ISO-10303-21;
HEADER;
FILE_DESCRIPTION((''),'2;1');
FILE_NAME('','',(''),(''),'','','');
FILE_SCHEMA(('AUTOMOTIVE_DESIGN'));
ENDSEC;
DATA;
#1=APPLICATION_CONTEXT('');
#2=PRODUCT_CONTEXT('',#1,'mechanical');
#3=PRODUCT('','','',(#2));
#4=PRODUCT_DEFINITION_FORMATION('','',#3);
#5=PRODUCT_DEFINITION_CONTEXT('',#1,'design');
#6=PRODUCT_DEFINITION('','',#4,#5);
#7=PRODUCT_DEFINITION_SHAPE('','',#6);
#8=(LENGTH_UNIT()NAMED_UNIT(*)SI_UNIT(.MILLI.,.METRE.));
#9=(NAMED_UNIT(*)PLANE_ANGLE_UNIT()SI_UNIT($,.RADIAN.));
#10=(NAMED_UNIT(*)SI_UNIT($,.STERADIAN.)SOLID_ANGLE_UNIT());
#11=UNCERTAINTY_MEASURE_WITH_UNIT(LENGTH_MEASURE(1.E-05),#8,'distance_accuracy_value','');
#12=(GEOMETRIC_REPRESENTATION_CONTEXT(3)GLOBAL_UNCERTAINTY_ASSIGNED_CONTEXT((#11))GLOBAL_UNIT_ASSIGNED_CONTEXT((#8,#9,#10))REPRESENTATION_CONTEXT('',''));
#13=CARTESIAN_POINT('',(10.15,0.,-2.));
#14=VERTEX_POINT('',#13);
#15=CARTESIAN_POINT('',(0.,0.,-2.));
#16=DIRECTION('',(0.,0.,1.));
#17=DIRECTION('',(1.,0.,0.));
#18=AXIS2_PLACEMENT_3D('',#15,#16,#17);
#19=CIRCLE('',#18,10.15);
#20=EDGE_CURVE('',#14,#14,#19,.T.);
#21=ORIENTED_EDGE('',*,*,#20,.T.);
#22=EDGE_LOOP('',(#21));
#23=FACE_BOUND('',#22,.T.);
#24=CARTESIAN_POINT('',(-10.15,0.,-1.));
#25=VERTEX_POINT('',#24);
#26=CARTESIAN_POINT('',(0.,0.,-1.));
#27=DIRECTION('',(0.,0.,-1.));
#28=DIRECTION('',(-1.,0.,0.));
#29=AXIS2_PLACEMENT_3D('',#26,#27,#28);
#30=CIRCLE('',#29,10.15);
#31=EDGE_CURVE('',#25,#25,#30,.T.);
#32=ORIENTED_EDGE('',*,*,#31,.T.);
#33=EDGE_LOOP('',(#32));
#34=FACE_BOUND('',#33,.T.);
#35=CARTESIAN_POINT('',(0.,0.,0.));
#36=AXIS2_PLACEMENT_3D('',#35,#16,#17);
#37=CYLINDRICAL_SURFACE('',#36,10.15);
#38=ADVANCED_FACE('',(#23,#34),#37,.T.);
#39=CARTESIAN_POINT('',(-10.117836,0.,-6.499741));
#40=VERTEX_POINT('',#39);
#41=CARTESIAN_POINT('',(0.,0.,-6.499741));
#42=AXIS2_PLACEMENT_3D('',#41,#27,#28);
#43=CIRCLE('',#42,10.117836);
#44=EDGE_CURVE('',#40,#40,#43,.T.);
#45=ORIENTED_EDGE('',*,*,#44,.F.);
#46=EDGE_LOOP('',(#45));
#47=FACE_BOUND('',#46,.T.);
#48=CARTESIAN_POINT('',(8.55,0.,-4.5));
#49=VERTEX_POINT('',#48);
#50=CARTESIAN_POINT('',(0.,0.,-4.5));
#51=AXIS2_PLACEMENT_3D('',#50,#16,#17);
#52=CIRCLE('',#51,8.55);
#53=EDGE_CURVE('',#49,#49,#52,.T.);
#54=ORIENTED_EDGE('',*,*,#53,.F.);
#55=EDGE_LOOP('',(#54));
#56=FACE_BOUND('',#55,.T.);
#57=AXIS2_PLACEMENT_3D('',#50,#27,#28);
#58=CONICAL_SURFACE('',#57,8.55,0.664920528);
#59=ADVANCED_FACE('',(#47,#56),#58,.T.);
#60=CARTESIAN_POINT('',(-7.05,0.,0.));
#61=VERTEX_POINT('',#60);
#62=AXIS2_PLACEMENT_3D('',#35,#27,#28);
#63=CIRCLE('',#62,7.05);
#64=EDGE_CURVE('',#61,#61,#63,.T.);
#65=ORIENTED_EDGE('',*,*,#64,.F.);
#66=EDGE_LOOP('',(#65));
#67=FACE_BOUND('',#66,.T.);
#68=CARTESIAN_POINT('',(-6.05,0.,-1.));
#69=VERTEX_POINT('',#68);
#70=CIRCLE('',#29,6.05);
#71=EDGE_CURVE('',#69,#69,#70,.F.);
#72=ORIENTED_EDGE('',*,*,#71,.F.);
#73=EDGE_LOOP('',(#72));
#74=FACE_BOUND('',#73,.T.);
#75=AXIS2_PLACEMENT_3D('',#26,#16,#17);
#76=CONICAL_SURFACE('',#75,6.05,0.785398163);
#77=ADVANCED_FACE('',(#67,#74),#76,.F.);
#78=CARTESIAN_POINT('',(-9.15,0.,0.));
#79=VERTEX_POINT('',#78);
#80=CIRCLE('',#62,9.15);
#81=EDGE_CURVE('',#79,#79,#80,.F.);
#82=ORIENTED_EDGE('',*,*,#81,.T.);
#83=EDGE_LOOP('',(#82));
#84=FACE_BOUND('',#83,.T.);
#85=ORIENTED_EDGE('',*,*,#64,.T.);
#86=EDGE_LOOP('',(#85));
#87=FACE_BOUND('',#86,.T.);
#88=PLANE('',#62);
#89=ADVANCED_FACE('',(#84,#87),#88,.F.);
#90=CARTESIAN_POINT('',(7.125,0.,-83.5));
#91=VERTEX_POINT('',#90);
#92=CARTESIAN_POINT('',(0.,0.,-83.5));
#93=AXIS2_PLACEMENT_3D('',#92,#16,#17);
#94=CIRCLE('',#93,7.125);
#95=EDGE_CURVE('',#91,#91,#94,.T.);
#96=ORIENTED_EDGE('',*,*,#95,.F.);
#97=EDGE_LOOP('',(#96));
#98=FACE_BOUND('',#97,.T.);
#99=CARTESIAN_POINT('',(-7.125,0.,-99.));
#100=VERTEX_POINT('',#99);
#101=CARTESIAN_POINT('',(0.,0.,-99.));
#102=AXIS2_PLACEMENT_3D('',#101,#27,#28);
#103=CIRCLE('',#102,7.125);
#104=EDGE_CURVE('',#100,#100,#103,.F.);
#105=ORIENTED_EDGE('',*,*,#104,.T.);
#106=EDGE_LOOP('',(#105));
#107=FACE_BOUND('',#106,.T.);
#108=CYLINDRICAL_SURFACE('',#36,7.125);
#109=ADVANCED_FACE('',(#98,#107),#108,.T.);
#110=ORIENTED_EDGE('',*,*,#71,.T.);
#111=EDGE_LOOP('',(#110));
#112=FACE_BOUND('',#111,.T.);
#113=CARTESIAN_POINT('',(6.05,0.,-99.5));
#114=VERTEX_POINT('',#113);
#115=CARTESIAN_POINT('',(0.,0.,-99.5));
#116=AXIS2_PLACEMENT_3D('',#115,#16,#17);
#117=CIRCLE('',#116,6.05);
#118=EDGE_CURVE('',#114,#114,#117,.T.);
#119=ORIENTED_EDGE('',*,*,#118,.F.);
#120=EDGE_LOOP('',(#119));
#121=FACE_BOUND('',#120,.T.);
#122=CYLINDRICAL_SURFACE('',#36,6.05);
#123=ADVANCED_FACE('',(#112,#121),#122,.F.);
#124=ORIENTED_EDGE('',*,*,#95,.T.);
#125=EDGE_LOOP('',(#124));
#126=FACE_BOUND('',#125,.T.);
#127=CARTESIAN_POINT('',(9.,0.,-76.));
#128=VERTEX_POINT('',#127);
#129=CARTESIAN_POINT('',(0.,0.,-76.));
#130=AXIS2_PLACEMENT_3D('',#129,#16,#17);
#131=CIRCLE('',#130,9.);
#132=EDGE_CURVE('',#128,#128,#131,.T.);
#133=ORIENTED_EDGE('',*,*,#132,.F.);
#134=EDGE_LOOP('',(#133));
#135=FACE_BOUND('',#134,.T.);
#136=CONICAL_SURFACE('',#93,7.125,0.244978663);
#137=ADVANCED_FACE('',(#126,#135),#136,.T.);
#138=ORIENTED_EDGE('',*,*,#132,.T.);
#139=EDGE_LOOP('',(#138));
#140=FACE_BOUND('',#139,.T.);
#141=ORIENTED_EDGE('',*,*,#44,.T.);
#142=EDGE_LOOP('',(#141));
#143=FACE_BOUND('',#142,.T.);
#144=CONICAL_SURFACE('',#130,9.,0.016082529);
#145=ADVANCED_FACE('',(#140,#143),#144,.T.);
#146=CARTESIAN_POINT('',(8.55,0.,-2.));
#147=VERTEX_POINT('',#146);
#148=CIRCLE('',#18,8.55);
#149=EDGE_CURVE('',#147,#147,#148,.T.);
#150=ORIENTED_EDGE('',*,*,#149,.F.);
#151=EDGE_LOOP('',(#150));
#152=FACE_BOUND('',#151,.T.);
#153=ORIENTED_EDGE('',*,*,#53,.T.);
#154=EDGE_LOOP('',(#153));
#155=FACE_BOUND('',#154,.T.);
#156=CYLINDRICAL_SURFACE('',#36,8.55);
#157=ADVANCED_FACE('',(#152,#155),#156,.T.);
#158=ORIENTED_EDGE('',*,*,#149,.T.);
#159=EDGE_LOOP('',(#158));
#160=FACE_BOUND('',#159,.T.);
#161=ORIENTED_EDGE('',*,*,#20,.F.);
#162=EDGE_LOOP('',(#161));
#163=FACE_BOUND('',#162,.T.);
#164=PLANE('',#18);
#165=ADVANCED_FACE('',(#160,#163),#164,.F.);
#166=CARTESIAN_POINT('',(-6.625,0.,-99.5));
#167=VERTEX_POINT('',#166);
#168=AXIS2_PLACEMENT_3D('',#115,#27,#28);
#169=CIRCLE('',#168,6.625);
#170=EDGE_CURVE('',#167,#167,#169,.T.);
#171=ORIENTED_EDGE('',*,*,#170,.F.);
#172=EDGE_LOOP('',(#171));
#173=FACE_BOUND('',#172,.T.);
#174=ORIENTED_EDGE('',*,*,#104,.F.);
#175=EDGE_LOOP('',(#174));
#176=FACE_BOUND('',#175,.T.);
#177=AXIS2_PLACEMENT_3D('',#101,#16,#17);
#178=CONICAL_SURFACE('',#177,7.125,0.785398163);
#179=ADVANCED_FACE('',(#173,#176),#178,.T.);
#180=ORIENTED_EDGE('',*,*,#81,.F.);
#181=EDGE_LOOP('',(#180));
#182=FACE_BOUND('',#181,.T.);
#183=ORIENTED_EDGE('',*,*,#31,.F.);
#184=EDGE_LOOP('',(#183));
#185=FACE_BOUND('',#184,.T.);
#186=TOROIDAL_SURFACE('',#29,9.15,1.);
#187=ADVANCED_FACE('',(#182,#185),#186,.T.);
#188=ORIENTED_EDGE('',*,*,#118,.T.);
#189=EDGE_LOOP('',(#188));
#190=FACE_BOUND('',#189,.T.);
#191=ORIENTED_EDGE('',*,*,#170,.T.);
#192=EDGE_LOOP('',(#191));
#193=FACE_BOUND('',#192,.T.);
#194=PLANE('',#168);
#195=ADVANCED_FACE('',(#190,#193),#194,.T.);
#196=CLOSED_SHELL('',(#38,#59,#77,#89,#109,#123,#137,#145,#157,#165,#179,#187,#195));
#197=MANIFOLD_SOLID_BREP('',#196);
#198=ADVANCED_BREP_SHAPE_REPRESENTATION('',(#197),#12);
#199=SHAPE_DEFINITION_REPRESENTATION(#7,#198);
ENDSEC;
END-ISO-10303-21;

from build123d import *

# Parameters (mm, degrees)
CHAMFER_1_SIZE2 = 1.6
CHAMFER_1_SIZE  = 2
FILLET_1_R      = 1
CHAMFER_2_SIZE  = 0.5
CHAMFER_3_SIZE  = 1


with BuildPart() as part:
    # 스케치2 → 회전1 (revolve)
    with BuildSketch(Plane(origin=(0, 0, 0), x_dir=(0, 0, -1), z_dir=(1, 0, 0)), mode=Mode.PRIVATE) as revolve_1_sk:
        Polygon((76, -9), (83.5, -7.125), (99.5, -7.125), (99.5, -6.05), (83.5, -6.05), (0, -6.05), (0, -10.15), (2, -10.15), (2, -8.55), (4.5, -8.55), (4.5, -10.15), align=None)
    revolve(revolve_1_sk.sketch.rotate(Axis((0, 0, 0), (0, 0, -1)), 270), axis=Axis((0, 0, 0), (0, 0, -1)))

    # 모따기1
    chamfer_1_edges = [part.edges().sort_by_distance(p)[0] for p in [
        (-10.15, 0, -4.5),
    ]]
    chamfer_1_side = [part.faces().sort_by_distance(p)[0] for p in [
        (-10.149485381, 0, -4.531995862),
    ]]
    chamfer(chamfer_1_edges, length=CHAMFER_1_SIZE - 0.0001, length2=CHAMFER_1_SIZE2 - 0.0001, reference=chamfer_1_side[0])  # a hair under: the kernel refuses the full size

    # 필렛1
    fillet_1_edges = [part.edges().sort_by_distance(p)[0] for p in [
        (-10.15, 0, 0),
    ]]
    fillet(fillet_1_edges, radius=FILLET_1_R)

    # 모따기2
    chamfer_2_edges = [part.edges().sort_by_distance(p)[0] for p in [
        (-7.125, 0, -99.5),
    ]]
    chamfer(chamfer_2_edges, length=CHAMFER_2_SIZE)

    # 모따기3
    chamfer_3_edges = [part.edges().sort_by_distance(p)[0] for p in [
        (-6.05, 0, 0),
    ]]
    chamfer(chamfer_3_edges, length=CHAMFER_3_SIZE)


solid = part.part
